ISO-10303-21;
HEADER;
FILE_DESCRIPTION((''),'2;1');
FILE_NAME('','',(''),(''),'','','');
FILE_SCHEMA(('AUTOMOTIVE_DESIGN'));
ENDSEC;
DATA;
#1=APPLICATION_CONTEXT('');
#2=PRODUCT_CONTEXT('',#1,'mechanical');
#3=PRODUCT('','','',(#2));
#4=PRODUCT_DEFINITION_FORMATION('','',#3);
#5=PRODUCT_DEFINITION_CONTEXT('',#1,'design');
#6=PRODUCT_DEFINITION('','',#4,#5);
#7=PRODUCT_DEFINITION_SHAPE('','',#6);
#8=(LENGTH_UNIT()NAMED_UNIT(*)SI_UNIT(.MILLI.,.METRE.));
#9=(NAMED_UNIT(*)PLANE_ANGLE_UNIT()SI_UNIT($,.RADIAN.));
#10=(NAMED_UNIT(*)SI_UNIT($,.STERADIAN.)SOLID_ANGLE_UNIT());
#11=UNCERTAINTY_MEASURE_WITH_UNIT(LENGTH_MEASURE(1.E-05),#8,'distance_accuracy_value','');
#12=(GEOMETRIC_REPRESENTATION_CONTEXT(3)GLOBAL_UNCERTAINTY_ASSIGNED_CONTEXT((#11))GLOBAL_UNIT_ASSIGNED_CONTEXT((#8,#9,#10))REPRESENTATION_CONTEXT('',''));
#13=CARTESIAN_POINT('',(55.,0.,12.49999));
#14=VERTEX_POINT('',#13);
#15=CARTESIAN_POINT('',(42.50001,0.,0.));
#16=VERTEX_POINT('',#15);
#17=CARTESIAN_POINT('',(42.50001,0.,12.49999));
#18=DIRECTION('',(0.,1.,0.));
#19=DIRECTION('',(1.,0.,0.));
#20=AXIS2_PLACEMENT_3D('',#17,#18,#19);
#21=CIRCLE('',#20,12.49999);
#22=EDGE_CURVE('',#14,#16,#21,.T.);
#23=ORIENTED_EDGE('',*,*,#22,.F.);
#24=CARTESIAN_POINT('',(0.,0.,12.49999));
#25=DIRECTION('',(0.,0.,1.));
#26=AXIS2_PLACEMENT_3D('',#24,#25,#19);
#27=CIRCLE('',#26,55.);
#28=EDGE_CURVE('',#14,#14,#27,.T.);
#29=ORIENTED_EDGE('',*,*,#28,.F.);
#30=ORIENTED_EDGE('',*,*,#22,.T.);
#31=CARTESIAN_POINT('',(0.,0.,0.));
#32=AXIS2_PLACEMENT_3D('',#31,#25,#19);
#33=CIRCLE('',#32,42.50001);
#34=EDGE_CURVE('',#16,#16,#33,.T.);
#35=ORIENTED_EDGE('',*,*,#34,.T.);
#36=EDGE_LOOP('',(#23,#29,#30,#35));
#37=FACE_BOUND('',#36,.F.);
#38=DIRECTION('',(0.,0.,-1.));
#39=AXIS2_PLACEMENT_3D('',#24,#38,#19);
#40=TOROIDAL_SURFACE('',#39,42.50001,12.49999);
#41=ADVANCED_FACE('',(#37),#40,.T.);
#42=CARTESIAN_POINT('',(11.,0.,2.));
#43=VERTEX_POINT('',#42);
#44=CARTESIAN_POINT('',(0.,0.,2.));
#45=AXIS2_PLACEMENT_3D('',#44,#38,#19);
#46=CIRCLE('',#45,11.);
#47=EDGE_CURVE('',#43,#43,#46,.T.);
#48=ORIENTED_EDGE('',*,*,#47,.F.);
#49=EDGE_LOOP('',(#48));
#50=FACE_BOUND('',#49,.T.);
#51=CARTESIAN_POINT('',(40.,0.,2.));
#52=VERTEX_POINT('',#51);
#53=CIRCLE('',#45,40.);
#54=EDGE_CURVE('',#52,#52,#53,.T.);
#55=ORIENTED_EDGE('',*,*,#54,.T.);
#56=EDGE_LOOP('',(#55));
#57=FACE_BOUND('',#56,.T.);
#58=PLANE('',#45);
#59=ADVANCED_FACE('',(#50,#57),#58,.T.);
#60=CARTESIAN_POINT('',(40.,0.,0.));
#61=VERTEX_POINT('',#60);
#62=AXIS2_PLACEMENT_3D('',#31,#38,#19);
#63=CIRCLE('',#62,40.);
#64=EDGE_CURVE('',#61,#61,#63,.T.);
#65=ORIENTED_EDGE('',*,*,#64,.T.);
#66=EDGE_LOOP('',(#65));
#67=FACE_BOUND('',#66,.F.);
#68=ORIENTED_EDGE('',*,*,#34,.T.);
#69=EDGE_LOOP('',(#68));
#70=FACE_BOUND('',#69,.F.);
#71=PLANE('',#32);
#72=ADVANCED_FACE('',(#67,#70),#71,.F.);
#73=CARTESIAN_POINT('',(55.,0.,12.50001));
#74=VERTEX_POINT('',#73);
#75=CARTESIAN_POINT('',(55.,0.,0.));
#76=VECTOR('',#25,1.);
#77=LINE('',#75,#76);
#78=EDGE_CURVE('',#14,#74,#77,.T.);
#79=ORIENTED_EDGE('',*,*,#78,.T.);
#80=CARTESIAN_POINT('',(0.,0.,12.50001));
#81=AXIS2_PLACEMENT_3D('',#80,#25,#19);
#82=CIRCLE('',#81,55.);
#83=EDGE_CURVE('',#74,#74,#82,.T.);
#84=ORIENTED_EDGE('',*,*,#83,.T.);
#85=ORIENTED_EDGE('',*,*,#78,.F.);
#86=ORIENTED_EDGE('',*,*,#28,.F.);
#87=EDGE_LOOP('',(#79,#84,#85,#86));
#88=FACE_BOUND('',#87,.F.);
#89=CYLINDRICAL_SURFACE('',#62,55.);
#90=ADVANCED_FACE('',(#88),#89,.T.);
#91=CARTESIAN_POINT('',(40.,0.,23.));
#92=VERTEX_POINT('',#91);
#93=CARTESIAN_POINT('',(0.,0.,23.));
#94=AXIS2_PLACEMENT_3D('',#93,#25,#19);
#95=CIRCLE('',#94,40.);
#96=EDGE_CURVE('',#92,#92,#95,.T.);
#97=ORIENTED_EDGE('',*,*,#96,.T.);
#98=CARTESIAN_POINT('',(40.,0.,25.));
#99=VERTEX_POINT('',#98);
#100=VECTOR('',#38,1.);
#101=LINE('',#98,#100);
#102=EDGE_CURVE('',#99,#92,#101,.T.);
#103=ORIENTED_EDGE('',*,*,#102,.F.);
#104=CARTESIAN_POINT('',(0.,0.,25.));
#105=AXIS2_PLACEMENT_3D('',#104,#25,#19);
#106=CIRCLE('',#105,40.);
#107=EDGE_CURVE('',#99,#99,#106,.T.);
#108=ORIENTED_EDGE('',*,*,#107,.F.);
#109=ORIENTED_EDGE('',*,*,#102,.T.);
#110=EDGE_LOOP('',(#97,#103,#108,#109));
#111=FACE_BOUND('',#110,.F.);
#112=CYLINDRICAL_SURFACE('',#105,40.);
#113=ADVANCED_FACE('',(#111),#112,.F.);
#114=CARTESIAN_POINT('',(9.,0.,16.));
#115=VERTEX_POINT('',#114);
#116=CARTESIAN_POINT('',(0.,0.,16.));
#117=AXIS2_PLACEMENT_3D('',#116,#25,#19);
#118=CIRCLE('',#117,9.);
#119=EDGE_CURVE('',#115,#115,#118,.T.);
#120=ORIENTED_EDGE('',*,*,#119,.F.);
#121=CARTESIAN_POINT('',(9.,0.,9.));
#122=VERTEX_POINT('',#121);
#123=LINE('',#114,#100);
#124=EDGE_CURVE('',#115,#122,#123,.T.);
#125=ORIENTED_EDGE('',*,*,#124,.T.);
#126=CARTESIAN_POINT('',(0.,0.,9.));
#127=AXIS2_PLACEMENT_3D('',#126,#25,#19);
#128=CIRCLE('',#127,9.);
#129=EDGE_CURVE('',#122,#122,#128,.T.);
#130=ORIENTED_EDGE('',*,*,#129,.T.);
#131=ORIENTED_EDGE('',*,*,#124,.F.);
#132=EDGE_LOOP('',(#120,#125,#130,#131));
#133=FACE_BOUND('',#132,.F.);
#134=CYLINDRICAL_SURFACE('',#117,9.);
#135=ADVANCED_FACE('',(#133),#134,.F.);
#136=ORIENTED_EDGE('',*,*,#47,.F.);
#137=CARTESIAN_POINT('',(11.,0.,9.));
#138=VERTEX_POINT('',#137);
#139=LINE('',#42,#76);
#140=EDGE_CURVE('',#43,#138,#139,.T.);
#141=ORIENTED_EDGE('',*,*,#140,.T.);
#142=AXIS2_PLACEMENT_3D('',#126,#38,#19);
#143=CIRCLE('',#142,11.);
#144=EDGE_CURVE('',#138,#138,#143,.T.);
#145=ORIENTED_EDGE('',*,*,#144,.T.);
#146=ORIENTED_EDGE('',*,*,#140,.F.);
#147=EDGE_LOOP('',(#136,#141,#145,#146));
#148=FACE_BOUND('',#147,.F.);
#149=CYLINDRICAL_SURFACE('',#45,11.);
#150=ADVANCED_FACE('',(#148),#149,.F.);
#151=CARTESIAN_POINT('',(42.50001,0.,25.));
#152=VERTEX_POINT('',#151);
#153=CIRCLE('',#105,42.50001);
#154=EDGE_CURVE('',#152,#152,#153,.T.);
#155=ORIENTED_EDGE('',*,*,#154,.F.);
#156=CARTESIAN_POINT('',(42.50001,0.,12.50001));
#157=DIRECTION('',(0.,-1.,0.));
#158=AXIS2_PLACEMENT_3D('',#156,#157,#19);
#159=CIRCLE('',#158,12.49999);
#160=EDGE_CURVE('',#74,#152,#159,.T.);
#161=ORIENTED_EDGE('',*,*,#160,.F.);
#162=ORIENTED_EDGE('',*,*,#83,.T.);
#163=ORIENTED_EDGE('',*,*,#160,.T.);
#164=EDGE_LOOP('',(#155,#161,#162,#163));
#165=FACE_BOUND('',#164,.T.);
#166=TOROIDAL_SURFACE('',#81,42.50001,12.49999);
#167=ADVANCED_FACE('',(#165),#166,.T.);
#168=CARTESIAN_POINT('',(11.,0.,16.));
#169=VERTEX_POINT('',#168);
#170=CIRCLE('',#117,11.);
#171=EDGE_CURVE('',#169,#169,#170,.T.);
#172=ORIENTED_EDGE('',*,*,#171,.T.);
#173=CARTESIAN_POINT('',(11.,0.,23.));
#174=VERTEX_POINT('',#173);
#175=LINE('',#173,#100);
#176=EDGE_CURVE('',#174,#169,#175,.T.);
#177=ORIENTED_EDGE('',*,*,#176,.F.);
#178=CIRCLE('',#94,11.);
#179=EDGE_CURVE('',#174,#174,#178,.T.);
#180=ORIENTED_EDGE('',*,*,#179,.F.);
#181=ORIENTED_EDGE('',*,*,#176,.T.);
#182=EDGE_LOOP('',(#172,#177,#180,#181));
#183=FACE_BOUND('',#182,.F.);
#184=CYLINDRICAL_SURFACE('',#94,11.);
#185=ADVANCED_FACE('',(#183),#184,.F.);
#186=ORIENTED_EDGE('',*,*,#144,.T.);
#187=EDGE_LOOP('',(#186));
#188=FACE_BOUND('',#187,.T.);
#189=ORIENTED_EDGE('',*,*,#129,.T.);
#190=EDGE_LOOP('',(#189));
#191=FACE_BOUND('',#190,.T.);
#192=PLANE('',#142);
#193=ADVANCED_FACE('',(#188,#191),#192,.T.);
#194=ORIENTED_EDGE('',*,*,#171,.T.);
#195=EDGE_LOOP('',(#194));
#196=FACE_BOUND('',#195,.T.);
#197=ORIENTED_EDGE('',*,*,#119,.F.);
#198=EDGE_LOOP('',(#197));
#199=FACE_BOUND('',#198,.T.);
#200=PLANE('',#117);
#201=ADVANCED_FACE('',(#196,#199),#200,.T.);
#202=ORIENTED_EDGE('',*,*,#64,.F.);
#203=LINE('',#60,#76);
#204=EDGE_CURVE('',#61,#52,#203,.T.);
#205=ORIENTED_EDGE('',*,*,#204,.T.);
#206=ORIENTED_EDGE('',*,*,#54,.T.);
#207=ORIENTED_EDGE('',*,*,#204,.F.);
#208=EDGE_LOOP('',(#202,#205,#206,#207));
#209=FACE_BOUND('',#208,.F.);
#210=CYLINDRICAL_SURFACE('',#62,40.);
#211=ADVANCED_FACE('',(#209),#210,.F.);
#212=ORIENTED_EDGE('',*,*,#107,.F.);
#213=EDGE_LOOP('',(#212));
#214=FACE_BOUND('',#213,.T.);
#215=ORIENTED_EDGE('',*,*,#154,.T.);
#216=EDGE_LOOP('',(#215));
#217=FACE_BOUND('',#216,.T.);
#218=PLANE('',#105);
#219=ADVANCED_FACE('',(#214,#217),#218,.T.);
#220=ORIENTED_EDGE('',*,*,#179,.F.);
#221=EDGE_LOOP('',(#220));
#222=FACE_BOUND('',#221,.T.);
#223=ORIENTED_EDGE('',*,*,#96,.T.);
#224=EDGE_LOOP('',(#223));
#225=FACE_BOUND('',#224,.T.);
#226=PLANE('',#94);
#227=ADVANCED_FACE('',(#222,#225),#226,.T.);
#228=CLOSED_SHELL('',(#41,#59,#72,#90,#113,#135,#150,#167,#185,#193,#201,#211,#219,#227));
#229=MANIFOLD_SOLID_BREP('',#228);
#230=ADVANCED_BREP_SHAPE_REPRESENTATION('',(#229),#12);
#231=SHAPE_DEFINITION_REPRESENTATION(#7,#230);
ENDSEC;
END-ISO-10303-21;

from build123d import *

# Parameters (mm, degrees)
F0_R      = 55
F1_DEPTH  = 25
F2_R      = 40
F3_DEPTH  = 2
F4_R      = 11
F5_DEPTH  = 7
F6_R      = 40
F7_DEPTH  = 2
F8_R      = 11
F9_DEPTH  = 7
F10_R     = 9
F11_DEPTH = 25
F12_R     = 12.49999


# Not quite as in the source:
# - a fillet or chamfer is up to 0.001 mm smaller than in the source, because OpenCascade refuses the exact size


with BuildPart() as f1:
    # F0 (on Top) → F1 (new body)
    with BuildSketch(Plane.XY):
        Circle(F0_R)
    extrude(amount=F1_DEPTH)

    # F2 (on face) → F3 (cut)
    with BuildSketch(Plane.XY.offset(25)):
        Circle(F2_R)
    extrude(amount=-F3_DEPTH, mode=Mode.SUBTRACT)

    # F4 (on face) → F5 (cut)
    with BuildSketch(Plane.XY.offset(23)):
        Circle(F4_R)
    extrude(amount=-F5_DEPTH, mode=Mode.SUBTRACT)

    # F6 (on face) → F7 (cut)
    with BuildSketch(Plane(origin=(0, 0, 0), x_dir=(1, 0, 0), z_dir=(0, 0, -1))):
        Circle(F6_R)
    extrude(amount=-F7_DEPTH, mode=Mode.SUBTRACT)

    # F8 (on face) → F9 (cut)
    with BuildSketch(Plane(origin=(0, 0, 2), x_dir=(1, 0, 0), z_dir=(0, 0, -1))):
        Circle(F8_R)
    extrude(amount=-F9_DEPTH, mode=Mode.SUBTRACT)

    # F10 (on face) → F11 (cut)
    with BuildSketch(Plane.XY.offset(16)):
        Circle(F10_R)
    extrude(amount=-F11_DEPTH, mode=Mode.SUBTRACT)

    # F12 (radius 12.5 in the source; OpenCascade refuses exactly that, so slightly less here)
    f12_edges = [f1.edges().sort_by_distance(p)[0] for p in [
        (-55, 0, 25),
        (-55, 0, 0),
    ]]
    fillet(f12_edges, radius=F12_R)


solid = f1.part
